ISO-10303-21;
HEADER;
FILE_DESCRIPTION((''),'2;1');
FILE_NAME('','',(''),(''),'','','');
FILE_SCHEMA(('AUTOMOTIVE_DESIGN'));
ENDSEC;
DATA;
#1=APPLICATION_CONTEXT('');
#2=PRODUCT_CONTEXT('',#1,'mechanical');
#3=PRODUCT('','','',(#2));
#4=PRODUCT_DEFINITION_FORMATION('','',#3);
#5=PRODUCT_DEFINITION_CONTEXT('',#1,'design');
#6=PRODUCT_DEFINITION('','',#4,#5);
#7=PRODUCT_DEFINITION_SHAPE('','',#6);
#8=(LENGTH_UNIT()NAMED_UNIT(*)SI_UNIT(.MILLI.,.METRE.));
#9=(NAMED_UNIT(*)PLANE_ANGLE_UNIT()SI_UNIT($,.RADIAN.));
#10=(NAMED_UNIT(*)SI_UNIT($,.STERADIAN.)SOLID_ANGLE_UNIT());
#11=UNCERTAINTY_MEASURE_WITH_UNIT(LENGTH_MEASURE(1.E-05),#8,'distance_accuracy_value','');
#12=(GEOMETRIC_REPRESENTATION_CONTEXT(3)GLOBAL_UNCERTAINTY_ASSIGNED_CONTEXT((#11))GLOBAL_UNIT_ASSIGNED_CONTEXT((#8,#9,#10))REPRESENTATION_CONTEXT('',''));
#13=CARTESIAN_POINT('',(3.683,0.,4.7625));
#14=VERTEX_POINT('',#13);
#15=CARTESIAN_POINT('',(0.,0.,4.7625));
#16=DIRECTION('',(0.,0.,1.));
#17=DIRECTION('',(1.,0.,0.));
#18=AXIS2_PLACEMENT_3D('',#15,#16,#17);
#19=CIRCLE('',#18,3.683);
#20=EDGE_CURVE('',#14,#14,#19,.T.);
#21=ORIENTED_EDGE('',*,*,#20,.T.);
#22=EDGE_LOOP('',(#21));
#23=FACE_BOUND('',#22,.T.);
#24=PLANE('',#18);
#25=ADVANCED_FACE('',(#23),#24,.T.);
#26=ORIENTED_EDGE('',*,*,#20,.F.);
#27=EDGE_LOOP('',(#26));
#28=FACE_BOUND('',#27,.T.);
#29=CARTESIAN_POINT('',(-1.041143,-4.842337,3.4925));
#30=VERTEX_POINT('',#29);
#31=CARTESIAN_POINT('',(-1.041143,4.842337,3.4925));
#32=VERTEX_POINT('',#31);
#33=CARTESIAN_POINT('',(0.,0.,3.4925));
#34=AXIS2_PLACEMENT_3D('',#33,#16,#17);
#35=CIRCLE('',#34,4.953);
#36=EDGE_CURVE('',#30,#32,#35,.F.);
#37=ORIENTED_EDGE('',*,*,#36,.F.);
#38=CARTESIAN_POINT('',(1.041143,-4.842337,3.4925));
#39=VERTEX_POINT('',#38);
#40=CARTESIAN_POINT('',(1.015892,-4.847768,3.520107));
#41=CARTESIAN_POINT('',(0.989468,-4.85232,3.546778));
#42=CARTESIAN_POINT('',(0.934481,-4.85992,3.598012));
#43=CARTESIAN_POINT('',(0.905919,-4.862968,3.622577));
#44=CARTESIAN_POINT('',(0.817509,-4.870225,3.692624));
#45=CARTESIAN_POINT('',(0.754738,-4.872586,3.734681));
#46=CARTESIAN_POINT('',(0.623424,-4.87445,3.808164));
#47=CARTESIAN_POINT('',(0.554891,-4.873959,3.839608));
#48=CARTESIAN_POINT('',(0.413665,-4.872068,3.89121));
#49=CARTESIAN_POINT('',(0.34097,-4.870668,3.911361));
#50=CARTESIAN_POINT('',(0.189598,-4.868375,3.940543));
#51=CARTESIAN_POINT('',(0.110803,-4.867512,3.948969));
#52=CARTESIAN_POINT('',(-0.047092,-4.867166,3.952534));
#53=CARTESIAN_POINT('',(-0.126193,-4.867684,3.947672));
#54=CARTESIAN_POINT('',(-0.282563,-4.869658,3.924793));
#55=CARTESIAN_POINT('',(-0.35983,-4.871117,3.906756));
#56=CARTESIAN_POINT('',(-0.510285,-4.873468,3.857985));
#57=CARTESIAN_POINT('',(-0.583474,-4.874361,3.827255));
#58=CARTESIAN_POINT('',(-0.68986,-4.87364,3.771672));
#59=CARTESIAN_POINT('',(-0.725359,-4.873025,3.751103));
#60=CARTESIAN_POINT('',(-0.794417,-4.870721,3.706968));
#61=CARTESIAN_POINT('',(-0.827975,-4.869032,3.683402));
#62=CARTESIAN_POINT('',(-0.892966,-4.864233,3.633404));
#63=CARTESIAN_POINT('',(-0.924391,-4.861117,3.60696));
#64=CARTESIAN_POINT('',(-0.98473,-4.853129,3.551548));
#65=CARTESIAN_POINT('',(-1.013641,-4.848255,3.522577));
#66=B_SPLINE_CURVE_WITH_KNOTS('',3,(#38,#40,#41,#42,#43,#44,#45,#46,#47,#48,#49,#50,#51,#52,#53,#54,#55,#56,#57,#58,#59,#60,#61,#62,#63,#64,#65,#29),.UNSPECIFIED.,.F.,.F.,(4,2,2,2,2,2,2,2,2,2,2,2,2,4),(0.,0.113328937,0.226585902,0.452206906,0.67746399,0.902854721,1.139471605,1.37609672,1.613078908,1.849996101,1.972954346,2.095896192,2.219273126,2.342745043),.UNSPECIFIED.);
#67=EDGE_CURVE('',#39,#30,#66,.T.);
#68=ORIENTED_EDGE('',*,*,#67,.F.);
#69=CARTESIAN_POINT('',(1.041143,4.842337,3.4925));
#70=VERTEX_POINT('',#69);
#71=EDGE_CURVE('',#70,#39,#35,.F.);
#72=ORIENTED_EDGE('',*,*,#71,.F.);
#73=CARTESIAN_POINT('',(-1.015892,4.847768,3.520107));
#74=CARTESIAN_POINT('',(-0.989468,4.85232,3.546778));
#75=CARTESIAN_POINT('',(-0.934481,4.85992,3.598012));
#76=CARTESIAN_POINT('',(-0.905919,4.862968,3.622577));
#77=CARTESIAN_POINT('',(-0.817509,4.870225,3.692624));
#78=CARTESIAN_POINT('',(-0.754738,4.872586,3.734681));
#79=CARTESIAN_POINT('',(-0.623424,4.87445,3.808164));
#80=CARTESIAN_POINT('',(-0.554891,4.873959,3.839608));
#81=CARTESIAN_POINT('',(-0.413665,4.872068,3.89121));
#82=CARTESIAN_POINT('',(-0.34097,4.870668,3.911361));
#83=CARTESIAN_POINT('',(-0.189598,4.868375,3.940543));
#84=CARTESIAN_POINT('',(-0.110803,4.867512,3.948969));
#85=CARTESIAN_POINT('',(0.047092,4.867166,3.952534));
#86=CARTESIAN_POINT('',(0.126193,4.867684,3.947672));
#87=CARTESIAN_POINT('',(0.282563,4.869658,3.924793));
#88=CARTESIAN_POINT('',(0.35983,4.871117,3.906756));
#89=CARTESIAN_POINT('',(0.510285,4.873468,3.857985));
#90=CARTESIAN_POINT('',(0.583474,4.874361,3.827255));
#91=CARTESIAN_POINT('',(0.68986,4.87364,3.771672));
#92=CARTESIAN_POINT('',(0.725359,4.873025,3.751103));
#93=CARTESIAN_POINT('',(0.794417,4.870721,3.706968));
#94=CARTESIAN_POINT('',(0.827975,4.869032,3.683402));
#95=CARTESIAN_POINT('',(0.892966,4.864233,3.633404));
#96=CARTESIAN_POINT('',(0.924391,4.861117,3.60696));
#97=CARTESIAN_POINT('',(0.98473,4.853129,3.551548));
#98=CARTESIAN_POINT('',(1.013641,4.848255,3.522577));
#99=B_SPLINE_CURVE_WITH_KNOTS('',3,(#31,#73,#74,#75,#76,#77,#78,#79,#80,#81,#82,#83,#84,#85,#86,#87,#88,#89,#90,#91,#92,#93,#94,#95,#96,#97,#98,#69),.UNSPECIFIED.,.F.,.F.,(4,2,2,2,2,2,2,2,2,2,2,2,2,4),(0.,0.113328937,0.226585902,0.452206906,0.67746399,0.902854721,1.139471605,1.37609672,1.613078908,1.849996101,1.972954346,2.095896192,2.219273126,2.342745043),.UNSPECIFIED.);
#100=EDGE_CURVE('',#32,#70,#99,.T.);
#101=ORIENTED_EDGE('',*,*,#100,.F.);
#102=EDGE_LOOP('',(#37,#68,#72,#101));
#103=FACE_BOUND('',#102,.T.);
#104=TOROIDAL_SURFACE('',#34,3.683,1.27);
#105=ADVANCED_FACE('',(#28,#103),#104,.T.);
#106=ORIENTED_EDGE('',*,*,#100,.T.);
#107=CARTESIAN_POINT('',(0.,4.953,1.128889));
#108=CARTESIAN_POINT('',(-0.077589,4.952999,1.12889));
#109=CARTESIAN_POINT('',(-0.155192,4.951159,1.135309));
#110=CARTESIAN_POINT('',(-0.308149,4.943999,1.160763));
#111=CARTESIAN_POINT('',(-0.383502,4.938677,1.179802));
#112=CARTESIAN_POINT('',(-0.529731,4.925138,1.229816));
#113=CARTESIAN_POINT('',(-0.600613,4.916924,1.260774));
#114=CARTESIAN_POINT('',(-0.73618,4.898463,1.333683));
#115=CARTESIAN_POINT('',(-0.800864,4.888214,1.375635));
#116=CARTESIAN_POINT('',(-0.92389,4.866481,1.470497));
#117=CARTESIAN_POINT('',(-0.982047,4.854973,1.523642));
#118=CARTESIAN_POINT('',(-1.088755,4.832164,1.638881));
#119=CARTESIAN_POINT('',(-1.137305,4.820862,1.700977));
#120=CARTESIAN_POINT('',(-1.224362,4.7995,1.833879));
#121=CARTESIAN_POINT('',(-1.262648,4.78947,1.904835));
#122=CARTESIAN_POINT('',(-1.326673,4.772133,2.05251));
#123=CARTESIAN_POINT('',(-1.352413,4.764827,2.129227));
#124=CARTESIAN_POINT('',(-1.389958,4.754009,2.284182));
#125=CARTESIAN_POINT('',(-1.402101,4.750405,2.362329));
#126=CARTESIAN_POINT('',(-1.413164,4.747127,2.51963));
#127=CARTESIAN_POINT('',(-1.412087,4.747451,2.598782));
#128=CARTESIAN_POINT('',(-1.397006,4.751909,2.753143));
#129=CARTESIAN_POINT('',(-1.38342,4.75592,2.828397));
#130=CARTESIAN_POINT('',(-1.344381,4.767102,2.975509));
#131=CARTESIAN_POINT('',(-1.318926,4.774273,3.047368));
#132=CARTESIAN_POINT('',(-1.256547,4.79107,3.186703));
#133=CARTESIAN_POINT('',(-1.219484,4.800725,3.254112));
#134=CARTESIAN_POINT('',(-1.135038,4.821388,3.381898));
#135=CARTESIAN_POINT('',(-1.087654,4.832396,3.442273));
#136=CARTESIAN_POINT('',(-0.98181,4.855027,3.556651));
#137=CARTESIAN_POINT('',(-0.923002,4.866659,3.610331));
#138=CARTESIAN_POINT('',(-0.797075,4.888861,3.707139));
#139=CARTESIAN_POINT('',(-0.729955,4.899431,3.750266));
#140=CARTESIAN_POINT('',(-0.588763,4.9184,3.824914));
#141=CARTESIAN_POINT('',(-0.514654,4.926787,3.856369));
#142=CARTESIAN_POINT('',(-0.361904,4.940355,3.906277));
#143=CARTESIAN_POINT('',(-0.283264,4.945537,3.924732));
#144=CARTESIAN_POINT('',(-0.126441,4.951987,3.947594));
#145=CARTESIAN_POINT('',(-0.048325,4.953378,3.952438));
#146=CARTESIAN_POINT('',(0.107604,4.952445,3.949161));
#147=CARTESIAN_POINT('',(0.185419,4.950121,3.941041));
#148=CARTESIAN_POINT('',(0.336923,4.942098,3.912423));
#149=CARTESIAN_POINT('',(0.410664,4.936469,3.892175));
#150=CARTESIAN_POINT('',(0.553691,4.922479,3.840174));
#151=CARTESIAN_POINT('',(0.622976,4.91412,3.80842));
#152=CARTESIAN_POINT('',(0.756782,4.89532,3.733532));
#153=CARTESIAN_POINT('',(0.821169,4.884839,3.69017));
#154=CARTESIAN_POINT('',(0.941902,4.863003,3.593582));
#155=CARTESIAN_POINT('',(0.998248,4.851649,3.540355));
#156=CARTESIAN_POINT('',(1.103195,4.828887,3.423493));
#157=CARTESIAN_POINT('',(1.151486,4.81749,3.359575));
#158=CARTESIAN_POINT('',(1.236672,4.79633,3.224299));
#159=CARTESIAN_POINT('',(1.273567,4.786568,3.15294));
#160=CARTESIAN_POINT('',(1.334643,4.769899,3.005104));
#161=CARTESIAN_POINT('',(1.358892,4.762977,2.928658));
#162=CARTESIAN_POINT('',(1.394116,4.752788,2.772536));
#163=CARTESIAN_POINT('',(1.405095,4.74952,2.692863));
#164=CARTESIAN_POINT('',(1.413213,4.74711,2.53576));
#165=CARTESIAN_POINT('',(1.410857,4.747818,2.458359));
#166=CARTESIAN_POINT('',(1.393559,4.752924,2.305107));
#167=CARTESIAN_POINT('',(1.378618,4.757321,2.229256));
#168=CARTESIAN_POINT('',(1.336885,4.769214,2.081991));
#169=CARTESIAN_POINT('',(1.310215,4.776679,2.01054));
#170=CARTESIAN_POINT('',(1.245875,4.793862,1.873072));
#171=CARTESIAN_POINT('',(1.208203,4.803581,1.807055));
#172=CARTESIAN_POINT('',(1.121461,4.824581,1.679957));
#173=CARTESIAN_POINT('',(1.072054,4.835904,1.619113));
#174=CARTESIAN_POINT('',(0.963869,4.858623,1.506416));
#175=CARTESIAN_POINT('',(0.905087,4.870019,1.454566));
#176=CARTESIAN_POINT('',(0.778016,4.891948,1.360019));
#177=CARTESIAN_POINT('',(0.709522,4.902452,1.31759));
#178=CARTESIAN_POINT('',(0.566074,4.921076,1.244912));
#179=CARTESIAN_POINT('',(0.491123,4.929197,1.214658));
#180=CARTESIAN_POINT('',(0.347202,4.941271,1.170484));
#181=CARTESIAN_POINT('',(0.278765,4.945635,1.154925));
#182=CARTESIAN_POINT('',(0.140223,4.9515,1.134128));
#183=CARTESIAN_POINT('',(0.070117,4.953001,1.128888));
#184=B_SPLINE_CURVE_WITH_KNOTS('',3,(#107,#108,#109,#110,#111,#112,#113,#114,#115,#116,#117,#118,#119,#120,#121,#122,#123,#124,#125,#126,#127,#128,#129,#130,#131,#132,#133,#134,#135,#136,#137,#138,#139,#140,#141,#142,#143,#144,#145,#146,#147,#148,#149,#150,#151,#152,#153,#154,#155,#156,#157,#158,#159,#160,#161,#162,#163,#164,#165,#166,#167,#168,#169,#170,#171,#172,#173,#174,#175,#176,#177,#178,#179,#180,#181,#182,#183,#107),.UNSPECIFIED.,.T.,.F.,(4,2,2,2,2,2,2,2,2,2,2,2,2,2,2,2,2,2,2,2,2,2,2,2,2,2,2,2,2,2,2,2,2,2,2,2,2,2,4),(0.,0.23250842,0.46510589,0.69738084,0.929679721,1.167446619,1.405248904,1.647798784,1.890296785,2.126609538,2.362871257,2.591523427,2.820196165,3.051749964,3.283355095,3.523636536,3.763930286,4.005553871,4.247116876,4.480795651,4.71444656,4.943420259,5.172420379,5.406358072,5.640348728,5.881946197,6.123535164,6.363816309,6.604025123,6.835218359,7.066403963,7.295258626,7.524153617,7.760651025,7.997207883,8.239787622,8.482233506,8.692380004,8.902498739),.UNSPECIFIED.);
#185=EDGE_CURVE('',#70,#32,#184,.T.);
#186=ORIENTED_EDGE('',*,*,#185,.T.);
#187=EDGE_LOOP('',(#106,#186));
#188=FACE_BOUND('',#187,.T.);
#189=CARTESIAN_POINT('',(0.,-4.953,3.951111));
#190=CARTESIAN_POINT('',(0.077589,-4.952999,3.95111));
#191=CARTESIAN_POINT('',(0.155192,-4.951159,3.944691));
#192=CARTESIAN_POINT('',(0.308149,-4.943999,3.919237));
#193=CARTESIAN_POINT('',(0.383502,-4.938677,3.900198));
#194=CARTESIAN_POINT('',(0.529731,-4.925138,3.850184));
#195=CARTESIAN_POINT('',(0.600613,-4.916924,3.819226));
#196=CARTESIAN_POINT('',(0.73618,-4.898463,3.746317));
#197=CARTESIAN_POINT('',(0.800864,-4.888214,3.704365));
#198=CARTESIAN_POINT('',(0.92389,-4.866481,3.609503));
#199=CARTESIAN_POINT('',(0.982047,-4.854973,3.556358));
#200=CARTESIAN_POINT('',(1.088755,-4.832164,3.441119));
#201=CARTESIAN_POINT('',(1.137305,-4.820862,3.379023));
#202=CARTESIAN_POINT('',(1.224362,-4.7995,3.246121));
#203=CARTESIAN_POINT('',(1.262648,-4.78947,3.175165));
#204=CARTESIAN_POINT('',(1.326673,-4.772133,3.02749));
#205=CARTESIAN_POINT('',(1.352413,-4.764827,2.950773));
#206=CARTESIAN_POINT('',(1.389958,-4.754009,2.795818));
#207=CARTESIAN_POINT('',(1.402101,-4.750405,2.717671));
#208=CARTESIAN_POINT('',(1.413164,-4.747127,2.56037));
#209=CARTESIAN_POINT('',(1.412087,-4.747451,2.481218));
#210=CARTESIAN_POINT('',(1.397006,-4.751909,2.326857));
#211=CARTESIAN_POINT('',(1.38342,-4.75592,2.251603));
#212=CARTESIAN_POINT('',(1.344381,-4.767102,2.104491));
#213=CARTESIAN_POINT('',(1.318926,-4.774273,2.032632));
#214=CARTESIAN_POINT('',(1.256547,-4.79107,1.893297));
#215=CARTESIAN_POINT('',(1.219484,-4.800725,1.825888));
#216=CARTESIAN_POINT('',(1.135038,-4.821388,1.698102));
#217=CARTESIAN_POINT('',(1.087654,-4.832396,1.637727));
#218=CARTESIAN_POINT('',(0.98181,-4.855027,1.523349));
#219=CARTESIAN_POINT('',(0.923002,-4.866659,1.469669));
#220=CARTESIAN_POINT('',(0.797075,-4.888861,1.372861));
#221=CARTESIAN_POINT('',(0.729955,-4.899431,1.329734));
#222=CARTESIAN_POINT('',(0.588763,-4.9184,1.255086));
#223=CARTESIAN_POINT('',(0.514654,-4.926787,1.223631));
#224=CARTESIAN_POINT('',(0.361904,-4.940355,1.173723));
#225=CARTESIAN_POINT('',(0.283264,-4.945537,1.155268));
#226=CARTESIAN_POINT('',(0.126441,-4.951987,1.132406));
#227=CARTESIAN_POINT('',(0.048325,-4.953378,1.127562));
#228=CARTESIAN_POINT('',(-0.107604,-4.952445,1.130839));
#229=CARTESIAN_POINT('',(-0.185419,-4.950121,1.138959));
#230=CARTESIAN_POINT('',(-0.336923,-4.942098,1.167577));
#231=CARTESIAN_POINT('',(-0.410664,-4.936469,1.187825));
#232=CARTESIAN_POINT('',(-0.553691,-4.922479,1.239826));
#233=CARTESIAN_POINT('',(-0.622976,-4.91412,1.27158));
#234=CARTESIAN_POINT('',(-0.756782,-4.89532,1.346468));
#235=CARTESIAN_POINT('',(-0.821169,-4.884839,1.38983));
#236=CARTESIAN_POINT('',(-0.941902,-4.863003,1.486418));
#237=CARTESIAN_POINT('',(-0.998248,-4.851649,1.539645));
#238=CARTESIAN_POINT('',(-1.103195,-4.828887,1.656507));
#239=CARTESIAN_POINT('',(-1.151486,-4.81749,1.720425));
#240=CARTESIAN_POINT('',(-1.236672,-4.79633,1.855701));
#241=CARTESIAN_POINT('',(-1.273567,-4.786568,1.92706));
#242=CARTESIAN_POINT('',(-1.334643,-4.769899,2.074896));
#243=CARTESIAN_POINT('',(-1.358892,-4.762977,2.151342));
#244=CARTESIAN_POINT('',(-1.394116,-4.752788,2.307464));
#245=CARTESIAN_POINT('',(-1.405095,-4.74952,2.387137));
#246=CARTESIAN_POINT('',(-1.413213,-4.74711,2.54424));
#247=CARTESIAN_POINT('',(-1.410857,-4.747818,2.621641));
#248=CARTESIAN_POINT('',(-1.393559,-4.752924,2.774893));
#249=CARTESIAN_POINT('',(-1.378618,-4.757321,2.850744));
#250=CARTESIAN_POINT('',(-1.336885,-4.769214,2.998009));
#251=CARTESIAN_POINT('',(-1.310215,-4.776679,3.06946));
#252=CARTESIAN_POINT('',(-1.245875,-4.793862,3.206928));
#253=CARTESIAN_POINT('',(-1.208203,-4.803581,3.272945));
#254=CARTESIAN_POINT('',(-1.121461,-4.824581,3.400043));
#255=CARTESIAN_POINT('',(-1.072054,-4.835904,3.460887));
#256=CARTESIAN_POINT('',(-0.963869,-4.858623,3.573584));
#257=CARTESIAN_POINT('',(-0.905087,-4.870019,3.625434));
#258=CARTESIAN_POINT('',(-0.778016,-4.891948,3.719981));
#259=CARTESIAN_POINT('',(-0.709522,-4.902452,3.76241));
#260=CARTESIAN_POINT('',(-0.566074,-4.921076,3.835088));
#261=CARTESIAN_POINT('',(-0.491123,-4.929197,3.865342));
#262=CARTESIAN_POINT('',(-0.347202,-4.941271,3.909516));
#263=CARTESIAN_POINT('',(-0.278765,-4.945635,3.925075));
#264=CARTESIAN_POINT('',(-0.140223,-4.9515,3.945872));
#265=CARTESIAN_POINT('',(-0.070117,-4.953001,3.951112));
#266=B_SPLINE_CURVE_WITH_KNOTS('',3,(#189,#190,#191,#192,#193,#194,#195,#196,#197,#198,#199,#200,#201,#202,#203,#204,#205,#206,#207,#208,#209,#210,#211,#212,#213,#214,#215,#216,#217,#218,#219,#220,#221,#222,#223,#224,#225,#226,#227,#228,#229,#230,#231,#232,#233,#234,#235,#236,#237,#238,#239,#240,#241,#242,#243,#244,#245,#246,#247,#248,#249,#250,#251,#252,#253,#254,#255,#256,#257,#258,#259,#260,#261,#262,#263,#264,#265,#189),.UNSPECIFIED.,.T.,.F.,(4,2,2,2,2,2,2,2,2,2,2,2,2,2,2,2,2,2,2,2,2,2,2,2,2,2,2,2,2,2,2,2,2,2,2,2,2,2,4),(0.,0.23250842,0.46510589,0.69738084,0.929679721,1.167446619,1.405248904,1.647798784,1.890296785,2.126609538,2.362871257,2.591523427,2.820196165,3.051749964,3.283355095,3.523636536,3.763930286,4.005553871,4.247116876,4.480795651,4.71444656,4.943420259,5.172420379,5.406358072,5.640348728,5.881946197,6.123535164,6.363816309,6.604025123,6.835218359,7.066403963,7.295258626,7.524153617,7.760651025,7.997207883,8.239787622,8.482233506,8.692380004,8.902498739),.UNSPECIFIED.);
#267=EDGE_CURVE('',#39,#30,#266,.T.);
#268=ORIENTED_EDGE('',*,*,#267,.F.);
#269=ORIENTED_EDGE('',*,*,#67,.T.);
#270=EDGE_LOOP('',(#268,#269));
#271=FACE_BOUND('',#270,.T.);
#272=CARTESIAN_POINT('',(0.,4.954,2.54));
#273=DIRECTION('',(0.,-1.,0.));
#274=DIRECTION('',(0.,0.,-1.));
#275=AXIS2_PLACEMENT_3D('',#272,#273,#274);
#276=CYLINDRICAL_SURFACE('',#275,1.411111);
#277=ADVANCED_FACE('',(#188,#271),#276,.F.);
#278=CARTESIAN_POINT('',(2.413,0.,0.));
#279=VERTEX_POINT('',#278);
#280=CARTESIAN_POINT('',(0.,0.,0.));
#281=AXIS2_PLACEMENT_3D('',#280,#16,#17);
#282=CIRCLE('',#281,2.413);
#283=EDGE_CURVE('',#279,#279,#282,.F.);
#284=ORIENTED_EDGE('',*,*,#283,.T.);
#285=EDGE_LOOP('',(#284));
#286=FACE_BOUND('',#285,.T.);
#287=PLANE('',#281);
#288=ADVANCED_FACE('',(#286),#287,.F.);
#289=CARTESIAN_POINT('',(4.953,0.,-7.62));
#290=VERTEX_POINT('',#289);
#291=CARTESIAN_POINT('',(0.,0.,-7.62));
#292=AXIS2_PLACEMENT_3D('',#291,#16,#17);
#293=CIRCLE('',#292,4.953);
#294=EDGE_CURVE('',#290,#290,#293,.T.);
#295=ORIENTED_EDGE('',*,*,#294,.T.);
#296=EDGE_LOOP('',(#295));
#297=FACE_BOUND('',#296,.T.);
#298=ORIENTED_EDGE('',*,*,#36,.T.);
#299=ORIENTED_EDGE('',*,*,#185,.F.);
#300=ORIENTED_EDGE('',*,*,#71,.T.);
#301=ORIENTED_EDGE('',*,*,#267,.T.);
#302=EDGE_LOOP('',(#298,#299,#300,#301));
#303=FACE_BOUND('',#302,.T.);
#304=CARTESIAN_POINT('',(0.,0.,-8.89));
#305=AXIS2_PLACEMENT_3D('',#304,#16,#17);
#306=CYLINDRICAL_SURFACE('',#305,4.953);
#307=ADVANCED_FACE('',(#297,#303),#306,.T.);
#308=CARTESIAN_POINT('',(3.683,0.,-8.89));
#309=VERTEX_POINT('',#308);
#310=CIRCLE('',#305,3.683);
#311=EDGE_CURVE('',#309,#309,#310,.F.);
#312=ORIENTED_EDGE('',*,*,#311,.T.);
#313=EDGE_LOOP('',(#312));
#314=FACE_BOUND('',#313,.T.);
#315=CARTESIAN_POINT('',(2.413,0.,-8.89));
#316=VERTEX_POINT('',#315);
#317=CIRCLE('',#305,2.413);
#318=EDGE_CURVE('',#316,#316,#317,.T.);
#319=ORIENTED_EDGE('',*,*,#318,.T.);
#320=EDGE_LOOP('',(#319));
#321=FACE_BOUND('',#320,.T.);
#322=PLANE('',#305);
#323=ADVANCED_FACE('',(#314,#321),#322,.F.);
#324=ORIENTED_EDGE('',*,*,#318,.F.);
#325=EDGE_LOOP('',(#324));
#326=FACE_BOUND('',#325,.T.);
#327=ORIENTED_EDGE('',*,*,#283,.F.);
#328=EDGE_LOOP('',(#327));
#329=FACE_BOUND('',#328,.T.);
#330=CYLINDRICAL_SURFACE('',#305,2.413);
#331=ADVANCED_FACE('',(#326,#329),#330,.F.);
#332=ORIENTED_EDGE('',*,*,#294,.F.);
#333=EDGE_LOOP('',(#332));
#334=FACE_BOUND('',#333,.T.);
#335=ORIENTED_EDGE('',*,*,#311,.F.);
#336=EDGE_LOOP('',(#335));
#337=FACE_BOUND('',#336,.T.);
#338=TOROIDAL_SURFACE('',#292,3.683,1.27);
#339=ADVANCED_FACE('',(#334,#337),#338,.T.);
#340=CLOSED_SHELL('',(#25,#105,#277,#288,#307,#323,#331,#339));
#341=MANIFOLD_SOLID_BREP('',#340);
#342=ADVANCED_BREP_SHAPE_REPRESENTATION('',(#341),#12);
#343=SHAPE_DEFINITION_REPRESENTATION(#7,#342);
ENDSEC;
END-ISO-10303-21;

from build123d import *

# Parameters (mm, degrees)
SKETCH2_R                           = 4.953
SKETCH2_R_2                         = 2.413
BOSS_EXTRUDE1_DEPTH                 = 8.89
BOSS_EXTRUDE2_START                 = 4.7625
SKETCH2_2_R                         = 4.953
SKETCH2_2_R_2                       = 2.413
SKETCH2_2_R_3                       = 1.9939
BOSS_EXTRUDE2_DEPTH                 = 4.7625
CUT_EXTRUDE1_REACH                  = 13.318
CUT_EXTRUDE1_END_RADIUS             = 4.953
SKETCH8_R                           = 1.411111111
CUT_EXTRUDE1_DIRECTION_2_REACH      = 13.318
CUT_EXTRUDE1_DIRECTION_2_END_RADIUS = 4.953
FILLET2_R                           = 1.27


with BuildPart() as part:
    # Sketch2 → Boss-Extrude1 (new body)
    with BuildSketch(Plane.XY):
        Circle(SKETCH2_R)
        Circle(SKETCH2_R_2, mode=Mode.SUBTRACT)
    extrude(amount=-BOSS_EXTRUDE1_DEPTH)

    # Sketch2<2> → Boss-Extrude2 (add)
    # profile 1 of 3: a face of its own
    with BuildSketch(Plane.XY.offset(BOSS_EXTRUDE2_START)):
        Circle(SKETCH2_2_R)
        Circle(SKETCH2_2_R_2, mode=Mode.SUBTRACT)
    # profile 2 of 3: a face of its own
    with BuildSketch(Plane.XY.offset(BOSS_EXTRUDE2_START)):
        Circle(SKETCH2_2_R_2)
        Circle(SKETCH2_2_R_3, mode=Mode.SUBTRACT)
    # profile 3 of 3: a face of its own
    with BuildSketch(Plane.XY.offset(BOSS_EXTRUDE2_START)):
        Circle(SKETCH2_2_R_3)
    extrude(amount=-BOSS_EXTRUDE2_DEPTH)

    # Cut-Extrude1: up to this cylinder (the profile starts inside it)
    cut_extrude1_end = Plane(origin=(0, 0, 2.54), z_dir=(0, 0, 1)) * Cylinder(CUT_EXTRUDE1_END_RADIUS, 37.542, mode=Mode.PRIVATE)
    # Sketch8 → Cut-Extrude1 (cut, up to the surface)
    with BuildSketch(Plane(origin=(0, 0, 0), x_dir=(1, 0, 0), z_dir=(0, 1, 0)), mode=Mode.PRIVATE) as cut_extrude1_sk1:
        with Locations(Location((0, -2.54, 0), (0, 0, 90))):
            Circle(SKETCH8_R)
    cut_extrude1_tool1 = extrude(cut_extrude1_sk1.sketch, amount=-CUT_EXTRUDE1_REACH, mode=Mode.PRIVATE) & cut_extrude1_end
    add(cut_extrude1_tool1.solids().sort_by_distance((0, 0, 2.54))[0], mode=Mode.SUBTRACT)

    # Cut-Extrude1 direction 2: up to this cylinder (the profile starts inside it)
    cut_extrude1_direction_2_end = Plane(origin=(0, 0, 2.54), z_dir=(0, 0, 1)) * Cylinder(CUT_EXTRUDE1_DIRECTION_2_END_RADIUS, 37.542, mode=Mode.PRIVATE)
    # Sketch8 → Cut-Extrude1 direction 2 (cut, up to the surface)
    with BuildSketch(Plane(origin=(0, 0, 0), x_dir=(1, 0, 0), z_dir=(0, 1, 0)), mode=Mode.PRIVATE) as cut_extrude1_direction_2_sk1:
        with Locations(Location((0, -2.54, 0), (0, 0, 90))):
            Circle(SKETCH8_R)
    cut_extrude1_direction_2_tool1 = extrude(cut_extrude1_direction_2_sk1.sketch, amount=CUT_EXTRUDE1_DIRECTION_2_REACH, mode=Mode.PRIVATE) & cut_extrude1_direction_2_end
    add(cut_extrude1_direction_2_tool1.solids().sort_by_distance((0, 0, 2.54))[0], mode=Mode.SUBTRACT)

    # Fillet2
    # the kernel refuses this fillet: 1.27 mm, written as the material it takes off along each edge
    with BuildSketch(Plane(origin=(0, 0, -8.89), x_dir=(1, 0, 0), z_dir=(0, -1, 0))) as fillet2_piece_1:
        with BuildLine():
            CenterArc((4.953 - FILLET2_R, FILLET2_R), FILLET2_R, 270, 90)
            Line((4.953 - FILLET2_R, 0), (4.953, 0))
            Line((4.953, 0), (4.953, FILLET2_R))
        make_face()
    revolve(axis=Axis((0, 0, -8.89), (0, 0, 1)), mode=Mode.SUBTRACT)
    with BuildSketch(Plane(origin=(0, 0, 4.7625), x_dir=(1, 0, 0), z_dir=(0, -1, 0))) as fillet2_piece_2:
        with BuildLine():
            CenterArc((4.953 - FILLET2_R, -FILLET2_R), FILLET2_R, 0, 90)
            Line((4.953 - FILLET2_R, 0), (4.953, 0))
            Line((4.953, 0), (4.953, -FILLET2_R))
        make_face()
    revolve(axis=Axis((0, 0, 4.7625), (0, 0, 1)), mode=Mode.SUBTRACT)


solid = part.part
